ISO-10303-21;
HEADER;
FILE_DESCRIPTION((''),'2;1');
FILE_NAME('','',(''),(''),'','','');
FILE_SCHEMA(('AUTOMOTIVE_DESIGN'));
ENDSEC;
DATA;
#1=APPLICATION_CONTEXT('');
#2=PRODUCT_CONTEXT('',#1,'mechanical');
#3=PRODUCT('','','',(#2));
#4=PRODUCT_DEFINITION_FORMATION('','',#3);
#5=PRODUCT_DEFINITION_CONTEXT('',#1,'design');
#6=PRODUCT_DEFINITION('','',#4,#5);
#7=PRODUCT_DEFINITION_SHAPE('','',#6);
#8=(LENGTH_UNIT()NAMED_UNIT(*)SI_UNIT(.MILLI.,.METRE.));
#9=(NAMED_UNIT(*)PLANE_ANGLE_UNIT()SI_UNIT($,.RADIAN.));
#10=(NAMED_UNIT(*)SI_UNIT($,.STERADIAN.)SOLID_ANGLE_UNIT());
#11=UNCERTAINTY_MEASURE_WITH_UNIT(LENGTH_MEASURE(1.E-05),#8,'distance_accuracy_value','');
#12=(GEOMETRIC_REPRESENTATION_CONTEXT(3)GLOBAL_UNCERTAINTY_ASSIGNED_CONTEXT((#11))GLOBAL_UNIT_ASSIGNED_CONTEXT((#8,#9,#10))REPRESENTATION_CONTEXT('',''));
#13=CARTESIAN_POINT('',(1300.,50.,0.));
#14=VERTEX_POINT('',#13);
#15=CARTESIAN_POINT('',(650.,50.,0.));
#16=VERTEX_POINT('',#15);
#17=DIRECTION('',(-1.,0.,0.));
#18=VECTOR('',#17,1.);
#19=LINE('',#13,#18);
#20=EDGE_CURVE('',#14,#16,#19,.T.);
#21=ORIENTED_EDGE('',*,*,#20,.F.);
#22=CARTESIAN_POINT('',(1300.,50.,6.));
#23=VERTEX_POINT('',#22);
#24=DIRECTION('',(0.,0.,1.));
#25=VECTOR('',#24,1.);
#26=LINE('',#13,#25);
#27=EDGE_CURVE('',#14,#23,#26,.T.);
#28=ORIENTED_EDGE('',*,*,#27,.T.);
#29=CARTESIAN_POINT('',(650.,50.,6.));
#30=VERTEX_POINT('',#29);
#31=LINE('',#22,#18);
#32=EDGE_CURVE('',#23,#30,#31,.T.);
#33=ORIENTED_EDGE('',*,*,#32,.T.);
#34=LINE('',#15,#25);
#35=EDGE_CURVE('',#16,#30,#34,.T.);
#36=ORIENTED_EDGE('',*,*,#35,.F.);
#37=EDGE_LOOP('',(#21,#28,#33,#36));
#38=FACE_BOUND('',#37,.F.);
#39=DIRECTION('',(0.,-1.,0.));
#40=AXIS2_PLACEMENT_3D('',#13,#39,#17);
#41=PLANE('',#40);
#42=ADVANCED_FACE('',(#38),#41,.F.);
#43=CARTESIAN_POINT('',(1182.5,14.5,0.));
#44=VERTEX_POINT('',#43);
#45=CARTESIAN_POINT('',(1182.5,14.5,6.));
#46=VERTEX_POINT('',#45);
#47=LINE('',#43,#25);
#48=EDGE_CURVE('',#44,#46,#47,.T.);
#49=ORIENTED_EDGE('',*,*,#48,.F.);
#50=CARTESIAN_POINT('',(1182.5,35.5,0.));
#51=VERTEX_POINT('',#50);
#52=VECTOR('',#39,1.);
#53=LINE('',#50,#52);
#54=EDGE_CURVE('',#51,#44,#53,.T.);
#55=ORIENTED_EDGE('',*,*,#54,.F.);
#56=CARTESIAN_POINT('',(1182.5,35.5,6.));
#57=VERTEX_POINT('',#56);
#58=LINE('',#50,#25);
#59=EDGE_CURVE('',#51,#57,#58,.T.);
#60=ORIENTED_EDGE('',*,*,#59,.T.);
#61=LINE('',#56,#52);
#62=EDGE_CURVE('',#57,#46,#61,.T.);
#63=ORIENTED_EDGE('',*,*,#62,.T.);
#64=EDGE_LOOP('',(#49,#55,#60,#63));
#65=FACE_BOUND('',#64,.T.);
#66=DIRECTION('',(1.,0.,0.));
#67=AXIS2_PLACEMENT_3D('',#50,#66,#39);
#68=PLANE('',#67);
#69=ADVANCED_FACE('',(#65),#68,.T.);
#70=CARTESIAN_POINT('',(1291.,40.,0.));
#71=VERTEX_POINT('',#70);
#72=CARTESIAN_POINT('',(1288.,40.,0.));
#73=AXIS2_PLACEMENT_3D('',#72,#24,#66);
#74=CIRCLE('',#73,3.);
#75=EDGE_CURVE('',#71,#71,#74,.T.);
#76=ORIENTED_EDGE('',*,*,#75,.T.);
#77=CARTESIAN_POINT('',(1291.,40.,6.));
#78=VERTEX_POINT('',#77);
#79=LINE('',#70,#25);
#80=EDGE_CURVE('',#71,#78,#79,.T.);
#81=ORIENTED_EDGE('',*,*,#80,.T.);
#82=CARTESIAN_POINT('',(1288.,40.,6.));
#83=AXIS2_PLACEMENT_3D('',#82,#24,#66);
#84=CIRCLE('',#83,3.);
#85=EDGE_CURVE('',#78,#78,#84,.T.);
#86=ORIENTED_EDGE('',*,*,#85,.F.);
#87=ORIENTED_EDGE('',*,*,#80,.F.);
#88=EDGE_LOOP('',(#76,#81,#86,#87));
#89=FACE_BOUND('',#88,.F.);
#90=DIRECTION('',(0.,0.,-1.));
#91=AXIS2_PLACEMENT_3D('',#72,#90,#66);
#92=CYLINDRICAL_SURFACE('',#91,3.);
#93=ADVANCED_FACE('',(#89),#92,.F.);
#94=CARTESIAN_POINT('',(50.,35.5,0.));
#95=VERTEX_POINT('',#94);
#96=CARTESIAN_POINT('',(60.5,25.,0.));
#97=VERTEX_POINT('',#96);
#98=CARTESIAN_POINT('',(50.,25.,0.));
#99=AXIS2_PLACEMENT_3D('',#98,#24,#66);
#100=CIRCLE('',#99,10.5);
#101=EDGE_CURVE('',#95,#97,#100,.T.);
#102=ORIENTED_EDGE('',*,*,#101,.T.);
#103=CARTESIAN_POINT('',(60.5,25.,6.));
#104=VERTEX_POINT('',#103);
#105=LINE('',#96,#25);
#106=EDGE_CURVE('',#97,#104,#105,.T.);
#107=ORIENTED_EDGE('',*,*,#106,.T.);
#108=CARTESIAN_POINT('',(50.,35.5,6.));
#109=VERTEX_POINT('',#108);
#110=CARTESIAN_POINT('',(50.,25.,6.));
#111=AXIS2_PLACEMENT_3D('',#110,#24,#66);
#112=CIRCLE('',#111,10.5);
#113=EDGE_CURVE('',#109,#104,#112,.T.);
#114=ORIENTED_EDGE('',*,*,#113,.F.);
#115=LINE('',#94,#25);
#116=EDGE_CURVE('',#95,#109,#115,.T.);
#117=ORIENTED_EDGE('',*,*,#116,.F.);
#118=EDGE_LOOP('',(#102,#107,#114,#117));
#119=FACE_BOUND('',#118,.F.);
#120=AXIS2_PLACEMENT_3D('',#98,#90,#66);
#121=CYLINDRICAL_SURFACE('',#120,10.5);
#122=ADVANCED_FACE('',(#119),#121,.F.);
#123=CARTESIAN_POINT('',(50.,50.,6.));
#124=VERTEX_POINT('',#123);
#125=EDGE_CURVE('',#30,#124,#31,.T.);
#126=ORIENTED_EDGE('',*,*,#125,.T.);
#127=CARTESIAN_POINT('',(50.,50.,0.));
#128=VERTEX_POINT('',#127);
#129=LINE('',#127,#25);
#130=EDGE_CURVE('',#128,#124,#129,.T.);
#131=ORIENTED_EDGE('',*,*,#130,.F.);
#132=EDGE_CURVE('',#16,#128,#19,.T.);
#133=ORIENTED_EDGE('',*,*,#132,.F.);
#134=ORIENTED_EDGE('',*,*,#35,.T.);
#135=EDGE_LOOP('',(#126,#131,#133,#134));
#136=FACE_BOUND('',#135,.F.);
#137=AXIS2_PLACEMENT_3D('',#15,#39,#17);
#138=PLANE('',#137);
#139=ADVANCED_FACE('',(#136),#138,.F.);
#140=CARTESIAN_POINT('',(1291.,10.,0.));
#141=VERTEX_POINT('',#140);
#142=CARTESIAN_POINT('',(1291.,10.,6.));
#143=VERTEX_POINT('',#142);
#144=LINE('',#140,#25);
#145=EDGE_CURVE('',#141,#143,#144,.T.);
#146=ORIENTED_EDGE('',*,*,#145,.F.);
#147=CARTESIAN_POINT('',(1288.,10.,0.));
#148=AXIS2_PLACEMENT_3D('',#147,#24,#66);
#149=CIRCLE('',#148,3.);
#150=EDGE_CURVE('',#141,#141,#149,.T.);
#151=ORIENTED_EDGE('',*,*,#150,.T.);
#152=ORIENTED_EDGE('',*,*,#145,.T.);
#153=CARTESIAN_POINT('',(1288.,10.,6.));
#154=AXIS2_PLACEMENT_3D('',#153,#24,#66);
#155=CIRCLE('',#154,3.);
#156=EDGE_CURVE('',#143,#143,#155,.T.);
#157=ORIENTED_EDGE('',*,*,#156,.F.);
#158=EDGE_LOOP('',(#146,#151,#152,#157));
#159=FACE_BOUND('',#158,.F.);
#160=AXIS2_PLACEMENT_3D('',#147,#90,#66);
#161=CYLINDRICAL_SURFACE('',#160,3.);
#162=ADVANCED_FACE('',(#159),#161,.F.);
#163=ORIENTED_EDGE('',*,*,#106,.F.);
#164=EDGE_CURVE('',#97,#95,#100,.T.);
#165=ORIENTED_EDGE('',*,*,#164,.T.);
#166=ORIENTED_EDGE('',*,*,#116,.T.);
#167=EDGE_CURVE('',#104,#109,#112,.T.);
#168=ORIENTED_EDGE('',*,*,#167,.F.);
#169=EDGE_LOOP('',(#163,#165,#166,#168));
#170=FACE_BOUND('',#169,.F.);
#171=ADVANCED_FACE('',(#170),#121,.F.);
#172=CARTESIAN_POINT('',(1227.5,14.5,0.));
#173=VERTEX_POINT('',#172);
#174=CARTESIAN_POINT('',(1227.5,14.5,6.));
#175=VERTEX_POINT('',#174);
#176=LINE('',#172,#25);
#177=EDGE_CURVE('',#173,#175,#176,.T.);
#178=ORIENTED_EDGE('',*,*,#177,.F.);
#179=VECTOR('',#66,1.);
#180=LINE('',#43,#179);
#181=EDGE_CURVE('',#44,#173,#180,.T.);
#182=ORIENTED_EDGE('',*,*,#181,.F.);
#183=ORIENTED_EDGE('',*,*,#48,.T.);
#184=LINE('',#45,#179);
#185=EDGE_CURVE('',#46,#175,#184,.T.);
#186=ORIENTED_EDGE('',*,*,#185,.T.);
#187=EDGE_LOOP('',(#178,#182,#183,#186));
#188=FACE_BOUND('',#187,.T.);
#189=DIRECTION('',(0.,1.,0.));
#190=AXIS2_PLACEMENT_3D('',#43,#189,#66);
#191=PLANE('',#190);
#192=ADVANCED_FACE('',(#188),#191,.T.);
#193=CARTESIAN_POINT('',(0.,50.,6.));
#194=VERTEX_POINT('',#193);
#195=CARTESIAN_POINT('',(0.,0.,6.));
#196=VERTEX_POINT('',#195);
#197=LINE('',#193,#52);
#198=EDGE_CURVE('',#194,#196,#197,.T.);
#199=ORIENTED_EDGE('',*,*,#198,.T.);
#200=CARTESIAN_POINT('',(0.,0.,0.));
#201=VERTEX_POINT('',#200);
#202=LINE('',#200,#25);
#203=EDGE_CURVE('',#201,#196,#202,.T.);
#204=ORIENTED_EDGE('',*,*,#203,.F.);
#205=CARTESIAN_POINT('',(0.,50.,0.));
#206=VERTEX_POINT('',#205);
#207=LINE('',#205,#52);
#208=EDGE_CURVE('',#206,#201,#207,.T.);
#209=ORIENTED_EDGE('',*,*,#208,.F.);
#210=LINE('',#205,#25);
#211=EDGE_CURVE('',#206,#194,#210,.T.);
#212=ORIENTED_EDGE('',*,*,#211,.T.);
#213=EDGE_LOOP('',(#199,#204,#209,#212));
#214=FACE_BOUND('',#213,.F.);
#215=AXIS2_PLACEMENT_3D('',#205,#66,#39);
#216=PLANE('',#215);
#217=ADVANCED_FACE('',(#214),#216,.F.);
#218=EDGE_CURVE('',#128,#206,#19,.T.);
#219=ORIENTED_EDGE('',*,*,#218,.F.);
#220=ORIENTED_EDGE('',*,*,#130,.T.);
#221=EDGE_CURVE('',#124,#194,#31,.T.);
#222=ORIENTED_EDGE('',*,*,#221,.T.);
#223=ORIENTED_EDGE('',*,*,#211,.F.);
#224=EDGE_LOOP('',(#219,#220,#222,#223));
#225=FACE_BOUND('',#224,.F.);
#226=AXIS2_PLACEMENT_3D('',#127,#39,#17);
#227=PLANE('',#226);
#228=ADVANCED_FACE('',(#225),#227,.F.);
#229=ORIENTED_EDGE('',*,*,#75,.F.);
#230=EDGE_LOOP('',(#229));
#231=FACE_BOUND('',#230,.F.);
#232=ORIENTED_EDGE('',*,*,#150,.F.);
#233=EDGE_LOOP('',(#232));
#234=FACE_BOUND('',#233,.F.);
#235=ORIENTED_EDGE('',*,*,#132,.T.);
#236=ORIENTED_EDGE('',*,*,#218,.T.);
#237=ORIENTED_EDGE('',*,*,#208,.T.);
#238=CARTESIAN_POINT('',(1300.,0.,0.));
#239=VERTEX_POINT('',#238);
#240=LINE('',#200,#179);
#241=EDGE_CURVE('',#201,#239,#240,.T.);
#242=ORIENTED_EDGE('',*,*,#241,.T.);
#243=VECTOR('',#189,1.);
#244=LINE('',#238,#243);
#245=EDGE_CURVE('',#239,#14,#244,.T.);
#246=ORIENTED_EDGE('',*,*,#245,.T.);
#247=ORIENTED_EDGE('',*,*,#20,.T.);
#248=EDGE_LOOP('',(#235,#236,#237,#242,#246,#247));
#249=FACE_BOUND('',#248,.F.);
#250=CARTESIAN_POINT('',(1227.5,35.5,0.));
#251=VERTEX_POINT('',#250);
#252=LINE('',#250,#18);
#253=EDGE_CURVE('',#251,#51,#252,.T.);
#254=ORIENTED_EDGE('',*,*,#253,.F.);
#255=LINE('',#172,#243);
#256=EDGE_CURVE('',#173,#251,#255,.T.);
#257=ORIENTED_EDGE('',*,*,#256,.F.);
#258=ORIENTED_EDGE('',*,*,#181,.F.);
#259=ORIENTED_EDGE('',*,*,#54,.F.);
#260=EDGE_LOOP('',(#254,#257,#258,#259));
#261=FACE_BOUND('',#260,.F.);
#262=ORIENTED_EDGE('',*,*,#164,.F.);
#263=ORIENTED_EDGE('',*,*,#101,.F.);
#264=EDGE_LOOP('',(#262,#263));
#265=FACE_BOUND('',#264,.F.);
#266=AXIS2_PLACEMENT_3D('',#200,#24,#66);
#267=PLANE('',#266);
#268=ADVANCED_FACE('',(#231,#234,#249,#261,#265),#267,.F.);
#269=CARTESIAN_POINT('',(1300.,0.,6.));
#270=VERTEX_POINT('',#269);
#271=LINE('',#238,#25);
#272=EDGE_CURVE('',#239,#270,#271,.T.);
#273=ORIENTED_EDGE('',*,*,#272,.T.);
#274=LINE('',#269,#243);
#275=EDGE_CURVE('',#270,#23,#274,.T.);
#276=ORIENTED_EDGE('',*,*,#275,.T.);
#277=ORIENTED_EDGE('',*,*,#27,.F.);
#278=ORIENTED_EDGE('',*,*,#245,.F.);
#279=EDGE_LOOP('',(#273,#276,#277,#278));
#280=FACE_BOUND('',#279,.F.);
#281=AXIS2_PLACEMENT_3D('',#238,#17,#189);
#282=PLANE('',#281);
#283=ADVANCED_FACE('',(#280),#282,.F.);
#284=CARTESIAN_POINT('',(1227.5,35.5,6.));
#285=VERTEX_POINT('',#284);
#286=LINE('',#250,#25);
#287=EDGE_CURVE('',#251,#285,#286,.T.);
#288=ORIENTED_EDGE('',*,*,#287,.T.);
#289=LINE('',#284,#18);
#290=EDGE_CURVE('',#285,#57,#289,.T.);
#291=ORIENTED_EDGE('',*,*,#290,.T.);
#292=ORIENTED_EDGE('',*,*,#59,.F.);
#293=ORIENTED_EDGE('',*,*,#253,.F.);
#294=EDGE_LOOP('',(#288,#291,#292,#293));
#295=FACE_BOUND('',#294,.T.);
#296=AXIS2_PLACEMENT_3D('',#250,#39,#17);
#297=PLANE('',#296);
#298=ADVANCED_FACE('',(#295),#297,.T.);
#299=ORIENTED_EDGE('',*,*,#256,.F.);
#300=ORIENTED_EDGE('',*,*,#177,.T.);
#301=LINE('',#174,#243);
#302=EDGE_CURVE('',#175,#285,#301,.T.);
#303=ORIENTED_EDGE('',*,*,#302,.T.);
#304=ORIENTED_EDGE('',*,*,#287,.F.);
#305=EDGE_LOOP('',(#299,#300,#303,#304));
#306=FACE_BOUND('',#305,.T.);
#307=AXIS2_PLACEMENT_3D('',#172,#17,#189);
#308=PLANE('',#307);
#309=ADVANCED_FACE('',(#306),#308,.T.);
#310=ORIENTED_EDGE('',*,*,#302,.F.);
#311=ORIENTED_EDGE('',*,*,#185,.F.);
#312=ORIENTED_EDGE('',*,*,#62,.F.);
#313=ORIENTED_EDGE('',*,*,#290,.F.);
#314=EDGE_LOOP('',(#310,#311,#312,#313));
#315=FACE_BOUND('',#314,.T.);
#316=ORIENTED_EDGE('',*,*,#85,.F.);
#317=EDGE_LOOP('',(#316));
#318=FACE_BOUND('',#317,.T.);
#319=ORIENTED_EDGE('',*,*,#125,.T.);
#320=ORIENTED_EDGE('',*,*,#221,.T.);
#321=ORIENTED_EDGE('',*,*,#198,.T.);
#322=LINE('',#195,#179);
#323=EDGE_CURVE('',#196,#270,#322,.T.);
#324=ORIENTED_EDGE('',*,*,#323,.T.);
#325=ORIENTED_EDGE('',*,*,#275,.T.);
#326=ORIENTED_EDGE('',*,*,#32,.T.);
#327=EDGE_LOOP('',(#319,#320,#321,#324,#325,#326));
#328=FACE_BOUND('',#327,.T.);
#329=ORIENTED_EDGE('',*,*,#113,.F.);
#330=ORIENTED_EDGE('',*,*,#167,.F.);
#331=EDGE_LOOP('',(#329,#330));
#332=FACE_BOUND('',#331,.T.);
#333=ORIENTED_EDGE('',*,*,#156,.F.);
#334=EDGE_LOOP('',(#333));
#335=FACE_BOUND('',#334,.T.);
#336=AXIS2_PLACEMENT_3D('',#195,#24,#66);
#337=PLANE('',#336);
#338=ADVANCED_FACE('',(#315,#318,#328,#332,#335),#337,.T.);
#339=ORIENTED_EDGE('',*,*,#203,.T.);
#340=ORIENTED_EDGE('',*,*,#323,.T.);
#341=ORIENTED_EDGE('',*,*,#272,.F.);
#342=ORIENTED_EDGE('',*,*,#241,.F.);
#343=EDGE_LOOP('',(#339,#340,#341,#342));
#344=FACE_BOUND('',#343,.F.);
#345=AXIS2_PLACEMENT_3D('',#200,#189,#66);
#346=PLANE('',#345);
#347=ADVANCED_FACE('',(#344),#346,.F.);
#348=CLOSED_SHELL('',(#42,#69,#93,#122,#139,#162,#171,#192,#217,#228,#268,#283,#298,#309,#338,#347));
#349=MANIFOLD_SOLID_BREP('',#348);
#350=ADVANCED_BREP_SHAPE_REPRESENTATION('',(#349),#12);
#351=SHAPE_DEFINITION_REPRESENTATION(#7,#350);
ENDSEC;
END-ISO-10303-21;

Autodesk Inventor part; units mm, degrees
ref_plane "YZ Plane" through (0, 0, 0) normal (1, 0, 0) x (0, 1, 0)
ref_plane "XZ Plane" through (0, 0, 0) normal (0, 1, 0) x (-1, 0, 0)
ref_plane "XY Plane" through (0, 0, 0) normal (0, 0, 1) x (1, 0, 0)
sketch "Sketch1" plane through (0, 0, 0) normal (0, 0, 1) x (1, 0, 0)
  line L0 (0, 0) -> (1300, 0)
  line L1 (1300, 0) -> (1300, 50)
  line L2 (1300, 50) -> (0, 50)
  line L3 (0, 50) -> (0, 0)
  line L4 (0, 50) -> (50, 50)
  line L5 (50, 50) -> (50, 25)
  circle A0 centre (50, 25) radius 10.5
  line L6 (650, 50) -> (650, 17.5)
  circle A1 centre (1288, 40) radius 3
  circle A2 centre (1288, 10) radius 3
  line L7 (1182.5, 14.5) -> (1227.5, 14.5)
  line L8 (1227.5, 14.5) -> (1227.5, 35.5)
  line L9 (1227.5, 35.5) -> (1182.5, 35.5)
  line L10 (1182.5, 35.5) -> (1182.5, 14.5)
  dimension "d0" = 1300
  dimension "d1" = 50
  dimension "d4" = 50
  dimension "d5" = 21
  dimension "d10" = 6
  dimension "d11" = 6
  dimension "d14" = 45
  dimension "d17" = 21
  dimension "d18" = 14.5
  dimension "d19" = 25
  dimension "d20" = 12
  dimension "d21" = 12
  dimension "d22" = 10
extrude "Extrusion4" add sketch "Sketch1" along normal blind 6
equation "\"d18\" = -0.5 * d17 + 0.5 * d1"
properties part number "convyerwall"
